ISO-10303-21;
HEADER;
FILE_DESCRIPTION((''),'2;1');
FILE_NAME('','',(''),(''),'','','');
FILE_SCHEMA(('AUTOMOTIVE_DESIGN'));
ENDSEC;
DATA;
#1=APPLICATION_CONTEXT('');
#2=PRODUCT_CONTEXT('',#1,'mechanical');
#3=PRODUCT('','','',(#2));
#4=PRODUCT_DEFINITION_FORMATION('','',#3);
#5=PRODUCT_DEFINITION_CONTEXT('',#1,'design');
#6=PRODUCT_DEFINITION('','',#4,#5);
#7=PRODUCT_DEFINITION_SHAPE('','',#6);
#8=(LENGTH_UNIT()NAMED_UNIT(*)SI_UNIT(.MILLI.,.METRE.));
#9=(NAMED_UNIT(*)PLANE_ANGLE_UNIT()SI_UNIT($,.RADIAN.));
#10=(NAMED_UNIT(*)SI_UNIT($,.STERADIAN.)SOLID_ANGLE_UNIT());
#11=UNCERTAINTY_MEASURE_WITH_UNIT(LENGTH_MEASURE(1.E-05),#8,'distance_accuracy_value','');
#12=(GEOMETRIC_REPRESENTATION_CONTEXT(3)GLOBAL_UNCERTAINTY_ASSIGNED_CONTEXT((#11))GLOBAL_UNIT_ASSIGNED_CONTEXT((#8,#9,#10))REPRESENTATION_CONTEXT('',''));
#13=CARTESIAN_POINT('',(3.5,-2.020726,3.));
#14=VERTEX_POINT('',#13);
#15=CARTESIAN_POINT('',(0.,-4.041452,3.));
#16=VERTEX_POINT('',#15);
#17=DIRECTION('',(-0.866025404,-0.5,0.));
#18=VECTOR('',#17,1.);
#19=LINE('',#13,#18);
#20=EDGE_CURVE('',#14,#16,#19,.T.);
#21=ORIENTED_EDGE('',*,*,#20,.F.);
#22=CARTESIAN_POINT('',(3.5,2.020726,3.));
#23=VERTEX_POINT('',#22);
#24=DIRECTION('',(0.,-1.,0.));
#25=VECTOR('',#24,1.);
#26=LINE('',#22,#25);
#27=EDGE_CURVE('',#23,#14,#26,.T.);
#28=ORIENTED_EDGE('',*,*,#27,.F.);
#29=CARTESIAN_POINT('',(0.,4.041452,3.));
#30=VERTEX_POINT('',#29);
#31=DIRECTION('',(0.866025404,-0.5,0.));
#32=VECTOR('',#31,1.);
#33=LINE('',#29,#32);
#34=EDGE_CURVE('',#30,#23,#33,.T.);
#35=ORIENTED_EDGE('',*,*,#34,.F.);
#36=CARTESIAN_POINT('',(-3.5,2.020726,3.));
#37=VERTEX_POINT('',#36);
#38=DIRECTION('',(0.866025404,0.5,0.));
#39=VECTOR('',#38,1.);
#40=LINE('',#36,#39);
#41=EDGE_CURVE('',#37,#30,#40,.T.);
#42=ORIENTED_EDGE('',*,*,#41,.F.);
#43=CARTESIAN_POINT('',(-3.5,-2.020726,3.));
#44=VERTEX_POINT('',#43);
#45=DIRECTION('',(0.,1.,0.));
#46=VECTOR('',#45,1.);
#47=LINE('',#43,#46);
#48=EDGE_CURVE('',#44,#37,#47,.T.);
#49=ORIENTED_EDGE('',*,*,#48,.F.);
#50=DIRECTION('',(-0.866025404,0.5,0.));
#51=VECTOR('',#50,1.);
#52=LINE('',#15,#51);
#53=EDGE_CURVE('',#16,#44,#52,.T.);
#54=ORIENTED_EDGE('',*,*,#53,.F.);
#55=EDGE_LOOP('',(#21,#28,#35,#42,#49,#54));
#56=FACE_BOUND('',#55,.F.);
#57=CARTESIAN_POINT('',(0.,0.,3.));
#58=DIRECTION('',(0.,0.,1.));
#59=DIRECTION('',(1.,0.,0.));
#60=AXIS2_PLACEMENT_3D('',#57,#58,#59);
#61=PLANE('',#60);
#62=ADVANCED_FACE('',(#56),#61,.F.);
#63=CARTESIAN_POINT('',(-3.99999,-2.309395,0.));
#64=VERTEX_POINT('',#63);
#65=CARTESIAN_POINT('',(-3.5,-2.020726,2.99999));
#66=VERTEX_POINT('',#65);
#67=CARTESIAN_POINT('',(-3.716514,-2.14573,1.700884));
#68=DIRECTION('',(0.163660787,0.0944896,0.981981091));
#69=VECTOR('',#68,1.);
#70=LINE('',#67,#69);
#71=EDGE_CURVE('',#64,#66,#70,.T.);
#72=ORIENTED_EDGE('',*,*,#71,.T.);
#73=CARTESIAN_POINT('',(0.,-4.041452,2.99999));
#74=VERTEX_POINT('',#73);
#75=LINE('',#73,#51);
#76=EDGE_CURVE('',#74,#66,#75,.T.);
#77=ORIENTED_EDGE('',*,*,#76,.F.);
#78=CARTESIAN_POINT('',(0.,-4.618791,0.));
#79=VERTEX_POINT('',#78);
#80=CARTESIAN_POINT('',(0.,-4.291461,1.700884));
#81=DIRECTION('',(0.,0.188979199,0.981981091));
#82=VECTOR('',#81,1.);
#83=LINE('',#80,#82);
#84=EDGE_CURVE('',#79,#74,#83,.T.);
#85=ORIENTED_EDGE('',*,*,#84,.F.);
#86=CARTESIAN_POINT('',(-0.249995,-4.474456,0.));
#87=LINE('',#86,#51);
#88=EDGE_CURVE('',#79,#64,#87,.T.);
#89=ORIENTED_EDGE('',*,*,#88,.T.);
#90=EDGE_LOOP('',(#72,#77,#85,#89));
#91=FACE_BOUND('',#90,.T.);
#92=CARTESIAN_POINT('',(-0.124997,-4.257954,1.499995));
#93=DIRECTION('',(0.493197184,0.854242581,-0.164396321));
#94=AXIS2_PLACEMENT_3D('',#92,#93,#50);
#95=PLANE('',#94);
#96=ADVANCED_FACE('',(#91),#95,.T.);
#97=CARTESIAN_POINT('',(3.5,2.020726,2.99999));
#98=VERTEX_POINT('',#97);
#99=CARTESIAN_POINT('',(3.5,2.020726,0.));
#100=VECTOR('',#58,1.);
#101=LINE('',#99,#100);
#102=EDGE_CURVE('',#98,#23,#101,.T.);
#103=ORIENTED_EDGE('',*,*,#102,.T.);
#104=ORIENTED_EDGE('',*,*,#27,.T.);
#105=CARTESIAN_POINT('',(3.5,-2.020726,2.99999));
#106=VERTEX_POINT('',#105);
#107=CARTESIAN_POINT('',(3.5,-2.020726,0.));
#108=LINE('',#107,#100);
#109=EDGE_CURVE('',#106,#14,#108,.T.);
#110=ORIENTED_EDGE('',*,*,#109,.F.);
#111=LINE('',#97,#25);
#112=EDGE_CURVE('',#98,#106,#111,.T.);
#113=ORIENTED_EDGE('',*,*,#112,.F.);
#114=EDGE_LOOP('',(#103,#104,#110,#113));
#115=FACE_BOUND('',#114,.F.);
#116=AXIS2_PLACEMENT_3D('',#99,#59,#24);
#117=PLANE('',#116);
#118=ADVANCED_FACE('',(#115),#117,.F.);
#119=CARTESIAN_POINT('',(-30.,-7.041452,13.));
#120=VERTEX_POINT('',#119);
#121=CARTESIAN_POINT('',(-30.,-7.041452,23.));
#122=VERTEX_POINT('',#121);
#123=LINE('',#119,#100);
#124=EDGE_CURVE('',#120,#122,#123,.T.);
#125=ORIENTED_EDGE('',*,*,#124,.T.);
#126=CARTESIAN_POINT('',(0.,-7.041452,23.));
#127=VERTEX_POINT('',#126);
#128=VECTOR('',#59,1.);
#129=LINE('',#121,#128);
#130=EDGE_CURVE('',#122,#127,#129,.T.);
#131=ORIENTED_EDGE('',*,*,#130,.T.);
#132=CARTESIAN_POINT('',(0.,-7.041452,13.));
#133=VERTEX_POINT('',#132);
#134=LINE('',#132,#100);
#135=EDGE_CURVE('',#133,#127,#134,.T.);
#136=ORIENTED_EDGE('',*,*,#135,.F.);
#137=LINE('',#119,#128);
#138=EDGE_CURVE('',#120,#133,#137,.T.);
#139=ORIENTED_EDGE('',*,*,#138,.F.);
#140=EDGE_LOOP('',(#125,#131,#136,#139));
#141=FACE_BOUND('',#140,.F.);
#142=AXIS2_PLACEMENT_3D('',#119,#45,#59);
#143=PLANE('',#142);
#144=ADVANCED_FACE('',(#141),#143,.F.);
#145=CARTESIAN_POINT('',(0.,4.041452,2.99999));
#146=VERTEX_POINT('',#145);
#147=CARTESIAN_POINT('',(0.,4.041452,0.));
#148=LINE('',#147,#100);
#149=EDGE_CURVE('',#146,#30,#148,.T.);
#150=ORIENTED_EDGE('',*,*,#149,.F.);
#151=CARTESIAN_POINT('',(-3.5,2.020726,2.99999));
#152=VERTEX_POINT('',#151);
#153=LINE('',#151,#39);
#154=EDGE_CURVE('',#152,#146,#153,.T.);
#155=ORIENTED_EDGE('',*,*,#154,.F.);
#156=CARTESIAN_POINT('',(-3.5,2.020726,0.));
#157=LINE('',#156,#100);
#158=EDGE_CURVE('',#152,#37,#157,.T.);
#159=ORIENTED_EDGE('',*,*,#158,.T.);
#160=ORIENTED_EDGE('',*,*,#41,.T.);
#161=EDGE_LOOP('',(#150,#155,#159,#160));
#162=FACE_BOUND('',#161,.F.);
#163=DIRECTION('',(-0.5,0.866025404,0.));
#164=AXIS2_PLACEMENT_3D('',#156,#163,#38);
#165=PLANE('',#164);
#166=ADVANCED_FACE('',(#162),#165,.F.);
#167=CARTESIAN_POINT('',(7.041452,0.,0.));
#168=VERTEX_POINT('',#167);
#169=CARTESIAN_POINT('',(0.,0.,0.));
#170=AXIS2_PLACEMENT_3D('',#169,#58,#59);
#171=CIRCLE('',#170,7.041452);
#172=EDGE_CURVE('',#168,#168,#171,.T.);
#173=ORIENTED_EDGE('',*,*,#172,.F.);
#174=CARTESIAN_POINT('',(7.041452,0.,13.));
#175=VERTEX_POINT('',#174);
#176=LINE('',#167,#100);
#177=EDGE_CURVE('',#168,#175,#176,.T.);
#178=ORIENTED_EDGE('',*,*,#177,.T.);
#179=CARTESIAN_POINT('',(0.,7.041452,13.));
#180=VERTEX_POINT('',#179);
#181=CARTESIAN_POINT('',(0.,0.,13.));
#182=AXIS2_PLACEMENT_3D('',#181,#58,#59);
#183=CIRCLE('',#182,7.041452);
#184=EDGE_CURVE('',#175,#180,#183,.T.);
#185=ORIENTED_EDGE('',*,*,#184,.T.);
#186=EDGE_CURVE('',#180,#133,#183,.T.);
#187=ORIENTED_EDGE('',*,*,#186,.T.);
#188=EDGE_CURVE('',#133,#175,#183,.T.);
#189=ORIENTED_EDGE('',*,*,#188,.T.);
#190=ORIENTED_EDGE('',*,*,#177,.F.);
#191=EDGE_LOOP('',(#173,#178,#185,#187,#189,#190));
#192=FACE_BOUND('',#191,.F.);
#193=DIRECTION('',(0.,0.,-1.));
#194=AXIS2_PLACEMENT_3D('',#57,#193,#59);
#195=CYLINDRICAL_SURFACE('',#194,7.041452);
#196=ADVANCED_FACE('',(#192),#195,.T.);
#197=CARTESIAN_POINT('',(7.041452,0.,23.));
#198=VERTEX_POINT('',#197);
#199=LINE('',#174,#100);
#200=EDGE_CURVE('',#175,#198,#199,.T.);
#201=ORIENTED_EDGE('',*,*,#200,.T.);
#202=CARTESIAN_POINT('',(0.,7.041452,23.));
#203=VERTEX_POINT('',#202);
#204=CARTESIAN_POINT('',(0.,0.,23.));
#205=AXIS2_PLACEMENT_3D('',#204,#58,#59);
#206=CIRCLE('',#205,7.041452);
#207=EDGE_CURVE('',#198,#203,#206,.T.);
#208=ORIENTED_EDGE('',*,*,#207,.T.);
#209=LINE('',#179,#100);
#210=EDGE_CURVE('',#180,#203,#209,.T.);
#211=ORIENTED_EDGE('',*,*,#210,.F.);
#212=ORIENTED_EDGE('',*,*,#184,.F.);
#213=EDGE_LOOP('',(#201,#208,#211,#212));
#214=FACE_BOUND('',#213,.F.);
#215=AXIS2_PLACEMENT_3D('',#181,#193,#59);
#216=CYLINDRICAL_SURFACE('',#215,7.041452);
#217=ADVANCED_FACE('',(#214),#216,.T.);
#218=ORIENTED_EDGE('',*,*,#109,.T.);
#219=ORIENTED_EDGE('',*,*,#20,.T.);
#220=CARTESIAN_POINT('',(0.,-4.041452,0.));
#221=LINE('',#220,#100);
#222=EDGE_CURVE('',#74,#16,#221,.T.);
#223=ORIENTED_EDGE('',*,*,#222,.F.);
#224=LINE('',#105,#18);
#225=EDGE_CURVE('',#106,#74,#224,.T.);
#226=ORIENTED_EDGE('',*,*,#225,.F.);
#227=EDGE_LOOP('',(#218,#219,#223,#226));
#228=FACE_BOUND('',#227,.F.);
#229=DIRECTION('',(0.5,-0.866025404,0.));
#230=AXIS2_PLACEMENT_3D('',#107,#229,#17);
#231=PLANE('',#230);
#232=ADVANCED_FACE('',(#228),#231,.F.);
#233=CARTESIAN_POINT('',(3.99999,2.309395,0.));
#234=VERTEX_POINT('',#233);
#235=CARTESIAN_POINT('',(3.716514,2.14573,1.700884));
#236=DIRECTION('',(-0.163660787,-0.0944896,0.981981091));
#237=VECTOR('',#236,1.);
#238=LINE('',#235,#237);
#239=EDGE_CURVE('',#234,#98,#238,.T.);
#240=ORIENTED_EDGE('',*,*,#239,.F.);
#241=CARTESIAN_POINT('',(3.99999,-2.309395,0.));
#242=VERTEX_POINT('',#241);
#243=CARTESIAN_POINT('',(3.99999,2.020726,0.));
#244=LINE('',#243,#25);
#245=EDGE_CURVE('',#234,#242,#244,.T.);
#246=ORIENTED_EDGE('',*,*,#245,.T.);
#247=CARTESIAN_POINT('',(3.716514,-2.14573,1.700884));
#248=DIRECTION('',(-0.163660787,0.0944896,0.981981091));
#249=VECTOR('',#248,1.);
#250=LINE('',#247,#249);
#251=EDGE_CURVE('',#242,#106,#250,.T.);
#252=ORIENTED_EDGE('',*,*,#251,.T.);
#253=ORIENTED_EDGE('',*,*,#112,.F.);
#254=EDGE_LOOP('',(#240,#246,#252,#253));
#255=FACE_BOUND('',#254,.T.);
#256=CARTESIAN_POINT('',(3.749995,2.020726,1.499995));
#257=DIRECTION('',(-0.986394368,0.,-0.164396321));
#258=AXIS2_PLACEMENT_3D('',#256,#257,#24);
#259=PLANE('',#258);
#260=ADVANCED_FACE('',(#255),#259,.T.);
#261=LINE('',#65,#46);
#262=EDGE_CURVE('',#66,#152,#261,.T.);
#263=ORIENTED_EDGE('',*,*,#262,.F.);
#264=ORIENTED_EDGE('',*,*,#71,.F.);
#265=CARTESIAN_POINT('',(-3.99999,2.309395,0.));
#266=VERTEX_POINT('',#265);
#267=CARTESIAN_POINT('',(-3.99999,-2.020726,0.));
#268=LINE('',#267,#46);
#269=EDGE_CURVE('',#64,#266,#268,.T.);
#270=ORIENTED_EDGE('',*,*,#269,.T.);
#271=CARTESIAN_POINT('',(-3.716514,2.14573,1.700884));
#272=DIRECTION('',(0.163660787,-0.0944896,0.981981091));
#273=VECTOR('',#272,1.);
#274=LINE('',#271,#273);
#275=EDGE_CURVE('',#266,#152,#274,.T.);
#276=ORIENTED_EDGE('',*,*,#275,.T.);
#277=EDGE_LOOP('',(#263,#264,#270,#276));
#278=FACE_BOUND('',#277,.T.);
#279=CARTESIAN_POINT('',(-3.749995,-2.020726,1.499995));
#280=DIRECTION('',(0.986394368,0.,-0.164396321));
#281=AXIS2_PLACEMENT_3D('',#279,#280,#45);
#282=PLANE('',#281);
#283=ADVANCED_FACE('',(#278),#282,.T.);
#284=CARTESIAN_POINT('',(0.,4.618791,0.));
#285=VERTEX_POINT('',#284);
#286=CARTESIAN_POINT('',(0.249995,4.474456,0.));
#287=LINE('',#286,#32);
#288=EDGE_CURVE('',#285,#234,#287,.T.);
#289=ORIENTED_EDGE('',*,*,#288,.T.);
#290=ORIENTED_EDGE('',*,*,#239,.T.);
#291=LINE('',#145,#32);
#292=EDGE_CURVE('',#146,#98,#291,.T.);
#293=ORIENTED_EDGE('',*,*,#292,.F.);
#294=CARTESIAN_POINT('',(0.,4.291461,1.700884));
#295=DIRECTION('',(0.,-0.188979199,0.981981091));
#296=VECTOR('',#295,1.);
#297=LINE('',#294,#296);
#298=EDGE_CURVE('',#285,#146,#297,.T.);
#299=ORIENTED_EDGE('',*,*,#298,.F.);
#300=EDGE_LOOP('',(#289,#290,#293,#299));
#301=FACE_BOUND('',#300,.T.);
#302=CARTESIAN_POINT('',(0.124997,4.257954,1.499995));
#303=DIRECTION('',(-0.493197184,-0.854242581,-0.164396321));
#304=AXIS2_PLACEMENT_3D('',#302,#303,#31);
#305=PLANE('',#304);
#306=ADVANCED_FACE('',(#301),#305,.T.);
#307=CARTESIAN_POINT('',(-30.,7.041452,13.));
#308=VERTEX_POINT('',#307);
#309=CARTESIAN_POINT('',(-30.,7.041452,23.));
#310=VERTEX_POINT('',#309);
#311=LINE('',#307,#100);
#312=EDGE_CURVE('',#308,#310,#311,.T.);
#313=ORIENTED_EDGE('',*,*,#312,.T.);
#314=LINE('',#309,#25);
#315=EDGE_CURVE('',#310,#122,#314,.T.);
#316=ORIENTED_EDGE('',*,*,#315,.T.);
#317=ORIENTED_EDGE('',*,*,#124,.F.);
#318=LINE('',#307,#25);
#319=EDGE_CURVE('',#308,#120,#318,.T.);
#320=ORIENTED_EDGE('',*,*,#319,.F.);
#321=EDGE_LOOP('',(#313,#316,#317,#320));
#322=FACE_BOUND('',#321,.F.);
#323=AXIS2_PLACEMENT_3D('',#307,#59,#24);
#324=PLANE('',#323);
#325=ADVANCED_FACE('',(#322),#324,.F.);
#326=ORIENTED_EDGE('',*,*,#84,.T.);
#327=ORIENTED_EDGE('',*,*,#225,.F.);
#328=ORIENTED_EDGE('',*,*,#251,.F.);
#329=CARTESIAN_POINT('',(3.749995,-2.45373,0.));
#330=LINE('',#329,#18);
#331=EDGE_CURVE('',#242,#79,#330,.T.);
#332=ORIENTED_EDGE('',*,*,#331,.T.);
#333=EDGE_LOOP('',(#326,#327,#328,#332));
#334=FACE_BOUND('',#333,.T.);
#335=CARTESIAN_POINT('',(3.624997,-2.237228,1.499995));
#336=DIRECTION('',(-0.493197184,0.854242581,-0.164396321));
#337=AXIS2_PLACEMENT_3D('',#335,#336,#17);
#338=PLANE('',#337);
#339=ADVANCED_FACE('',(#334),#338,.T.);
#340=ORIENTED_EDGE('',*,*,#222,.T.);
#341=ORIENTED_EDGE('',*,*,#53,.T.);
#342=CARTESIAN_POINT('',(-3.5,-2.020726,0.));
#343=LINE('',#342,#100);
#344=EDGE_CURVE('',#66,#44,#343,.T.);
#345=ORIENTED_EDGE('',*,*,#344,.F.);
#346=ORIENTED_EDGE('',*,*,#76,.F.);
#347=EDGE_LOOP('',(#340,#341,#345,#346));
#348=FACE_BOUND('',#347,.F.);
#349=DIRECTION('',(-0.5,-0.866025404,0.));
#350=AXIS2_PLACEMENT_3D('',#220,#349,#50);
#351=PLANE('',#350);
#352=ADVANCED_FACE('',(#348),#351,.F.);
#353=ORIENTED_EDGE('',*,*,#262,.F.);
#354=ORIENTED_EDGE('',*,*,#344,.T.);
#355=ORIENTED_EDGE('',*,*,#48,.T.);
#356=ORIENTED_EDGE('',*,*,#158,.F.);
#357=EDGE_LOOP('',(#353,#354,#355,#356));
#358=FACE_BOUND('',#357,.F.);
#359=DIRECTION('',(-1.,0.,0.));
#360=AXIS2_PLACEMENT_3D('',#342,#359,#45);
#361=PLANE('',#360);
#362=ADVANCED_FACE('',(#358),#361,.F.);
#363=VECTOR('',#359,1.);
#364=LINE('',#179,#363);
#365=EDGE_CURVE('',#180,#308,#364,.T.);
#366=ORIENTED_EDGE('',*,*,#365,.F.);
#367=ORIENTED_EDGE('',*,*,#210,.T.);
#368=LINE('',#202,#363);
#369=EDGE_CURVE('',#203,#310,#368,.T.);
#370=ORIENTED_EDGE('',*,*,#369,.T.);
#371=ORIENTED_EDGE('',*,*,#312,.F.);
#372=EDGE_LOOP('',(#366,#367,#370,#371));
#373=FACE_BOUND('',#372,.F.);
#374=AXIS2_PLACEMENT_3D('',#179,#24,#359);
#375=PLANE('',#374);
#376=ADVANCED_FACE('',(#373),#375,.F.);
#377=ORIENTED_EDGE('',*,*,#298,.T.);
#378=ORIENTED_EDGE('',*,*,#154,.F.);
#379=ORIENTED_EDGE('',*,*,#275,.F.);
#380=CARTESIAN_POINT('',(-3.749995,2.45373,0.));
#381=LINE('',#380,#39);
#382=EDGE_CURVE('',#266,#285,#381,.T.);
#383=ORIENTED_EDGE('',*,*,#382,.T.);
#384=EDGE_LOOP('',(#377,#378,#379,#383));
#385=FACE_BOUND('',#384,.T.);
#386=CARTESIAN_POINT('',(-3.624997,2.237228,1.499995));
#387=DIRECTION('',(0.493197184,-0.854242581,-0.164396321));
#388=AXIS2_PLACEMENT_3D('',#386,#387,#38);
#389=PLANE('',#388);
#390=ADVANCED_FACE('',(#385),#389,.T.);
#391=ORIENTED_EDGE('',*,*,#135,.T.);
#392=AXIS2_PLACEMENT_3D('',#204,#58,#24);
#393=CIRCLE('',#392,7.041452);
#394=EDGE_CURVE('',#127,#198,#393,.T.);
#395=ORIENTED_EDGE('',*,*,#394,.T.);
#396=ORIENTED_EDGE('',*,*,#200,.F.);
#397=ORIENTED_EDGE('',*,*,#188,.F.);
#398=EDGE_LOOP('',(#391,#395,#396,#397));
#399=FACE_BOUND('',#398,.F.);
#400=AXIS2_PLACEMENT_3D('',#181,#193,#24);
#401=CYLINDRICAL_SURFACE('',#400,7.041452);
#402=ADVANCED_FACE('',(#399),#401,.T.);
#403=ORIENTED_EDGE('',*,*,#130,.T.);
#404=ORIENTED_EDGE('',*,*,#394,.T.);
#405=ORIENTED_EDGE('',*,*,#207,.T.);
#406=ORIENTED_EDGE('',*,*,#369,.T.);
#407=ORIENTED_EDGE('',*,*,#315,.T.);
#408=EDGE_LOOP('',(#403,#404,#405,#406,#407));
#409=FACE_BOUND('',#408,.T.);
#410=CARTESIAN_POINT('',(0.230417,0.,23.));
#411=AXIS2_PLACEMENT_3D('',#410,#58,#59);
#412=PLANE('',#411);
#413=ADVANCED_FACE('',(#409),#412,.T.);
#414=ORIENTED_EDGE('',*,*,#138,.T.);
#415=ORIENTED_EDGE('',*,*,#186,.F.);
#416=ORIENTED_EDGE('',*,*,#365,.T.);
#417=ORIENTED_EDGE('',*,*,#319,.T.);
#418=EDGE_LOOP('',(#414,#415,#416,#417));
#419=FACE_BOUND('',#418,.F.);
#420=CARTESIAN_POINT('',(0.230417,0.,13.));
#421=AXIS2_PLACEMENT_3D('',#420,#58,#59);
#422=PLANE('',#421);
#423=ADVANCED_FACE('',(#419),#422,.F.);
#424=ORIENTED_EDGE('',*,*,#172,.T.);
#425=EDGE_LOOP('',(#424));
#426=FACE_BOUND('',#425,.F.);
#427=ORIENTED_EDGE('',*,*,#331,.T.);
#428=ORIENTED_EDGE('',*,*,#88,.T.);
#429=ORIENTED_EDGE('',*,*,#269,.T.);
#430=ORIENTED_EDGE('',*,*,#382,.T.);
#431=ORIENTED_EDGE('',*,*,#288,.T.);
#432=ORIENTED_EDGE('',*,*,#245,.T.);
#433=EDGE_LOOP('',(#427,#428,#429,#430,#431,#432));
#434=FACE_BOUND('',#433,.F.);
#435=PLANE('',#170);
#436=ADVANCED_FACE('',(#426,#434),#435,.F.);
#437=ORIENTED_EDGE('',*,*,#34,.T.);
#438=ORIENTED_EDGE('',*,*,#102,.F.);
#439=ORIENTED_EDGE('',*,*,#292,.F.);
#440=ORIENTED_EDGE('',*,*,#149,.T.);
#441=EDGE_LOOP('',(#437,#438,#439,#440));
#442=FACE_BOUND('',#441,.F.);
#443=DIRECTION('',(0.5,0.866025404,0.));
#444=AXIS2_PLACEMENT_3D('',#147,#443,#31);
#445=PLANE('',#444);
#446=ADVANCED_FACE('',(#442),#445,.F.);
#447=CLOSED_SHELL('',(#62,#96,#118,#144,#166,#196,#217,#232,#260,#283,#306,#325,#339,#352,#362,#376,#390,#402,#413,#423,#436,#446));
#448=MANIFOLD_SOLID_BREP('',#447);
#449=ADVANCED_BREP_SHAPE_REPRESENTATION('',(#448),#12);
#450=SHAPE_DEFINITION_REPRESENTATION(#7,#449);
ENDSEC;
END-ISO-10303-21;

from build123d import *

# Parameters (mm, degrees)
F0_R     = 7.0414518843
F1_DEPTH = 3
F2_R     = 7.0414518843
F3_DEPTH = 10
F5_DEPTH = 10
F6_SIZE2 = 2.99999
F6_SIZE  = 0.49999


# Not quite as in the source:
# - a fillet or chamfer is up to 0.001 mm smaller than in the source, because OpenCascade refuses the exact size


with BuildPart() as f1:
    # F0 (on Top) → F1 (new body)
    with BuildSketch(Plane.XY):
        Circle(F0_R)
        Polygon((0, -4.0414518843), (-3.5, -2.0207259422), (-3.5, 2.0207259422), (0, 4.0414518843), (3.5, 2.0207259422), (3.5, -2.0207259422), align=None, mode=Mode.SUBTRACT)
    extrude(amount=F1_DEPTH)

    # F2 (on face) → F3 (join)
    with BuildSketch(Plane.XY.offset(3)):
        Circle(F2_R)
        Polygon((3.5, -2.0207259422), (0, -4.0414518843), (-3.5, -2.0207259422), (-3.5, 2.0207259422), (0, 4.0414518843), (3.5, 2.0207259422), align=None, mode=Mode.SUBTRACT)
        Polygon((-3.5, -2.0207259422), (0, -4.0414518843), (3.5, -2.0207259422), (3.5, 2.0207259422), (0, 4.0414518843), (-3.5, 2.0207259422), align=None)
    extrude(amount=F3_DEPTH)

    # F4 (on face) → F5 (join)
    with BuildSketch(Plane.XY.offset(13)):
        with BuildLine():
            ThreePointArc((7.0414518843, 0), (4.9790583768, 4.9790583768), (0, 7.0414518843))
            ThreePointArc((0, 7.0414518843), (-7.0414518843, 0), (0, -7.0414518843))
            ThreePointArc((0, -7.0414518843), (4.9790583768, -4.9790583768), (7.0414518843, 0))
        make_face()
        with BuildLine():
            ThreePointArc((0, -7.0414518843), (-7.0414518843, 0), (0, 7.0414518843))
            Line((0, 7.0414518843), (-30, 7.0414518843))
            Line((-30, 7.0414518843), (-30, -7.0414518843))
            Line((-30, -7.0414518843), (0, -7.0414518843))
        make_face()
    extrude(amount=F5_DEPTH)

    # F6 (size 0.5 and 3 in the source; OpenCascade refuses exactly that, so slightly less here)
    f6_edges = [f1.edges().sort_by_distance(p)[0] for p in [
        (-1.75, -3.031089, 0),
        (-3.5, 0, 0),
        (1.75, -3.031089, 0),
        (3.5, 0, 0),
        (1.75, 3.031089, 0),
        (-1.75, 3.031089, 0),
    ]]
    f6_side = f1.faces().sort_by_distance((-6.84229, 0, 0))[0]
    chamfer(f6_edges, length=F6_SIZE, length2=F6_SIZE2, reference=f6_side)


solid = f1.part
